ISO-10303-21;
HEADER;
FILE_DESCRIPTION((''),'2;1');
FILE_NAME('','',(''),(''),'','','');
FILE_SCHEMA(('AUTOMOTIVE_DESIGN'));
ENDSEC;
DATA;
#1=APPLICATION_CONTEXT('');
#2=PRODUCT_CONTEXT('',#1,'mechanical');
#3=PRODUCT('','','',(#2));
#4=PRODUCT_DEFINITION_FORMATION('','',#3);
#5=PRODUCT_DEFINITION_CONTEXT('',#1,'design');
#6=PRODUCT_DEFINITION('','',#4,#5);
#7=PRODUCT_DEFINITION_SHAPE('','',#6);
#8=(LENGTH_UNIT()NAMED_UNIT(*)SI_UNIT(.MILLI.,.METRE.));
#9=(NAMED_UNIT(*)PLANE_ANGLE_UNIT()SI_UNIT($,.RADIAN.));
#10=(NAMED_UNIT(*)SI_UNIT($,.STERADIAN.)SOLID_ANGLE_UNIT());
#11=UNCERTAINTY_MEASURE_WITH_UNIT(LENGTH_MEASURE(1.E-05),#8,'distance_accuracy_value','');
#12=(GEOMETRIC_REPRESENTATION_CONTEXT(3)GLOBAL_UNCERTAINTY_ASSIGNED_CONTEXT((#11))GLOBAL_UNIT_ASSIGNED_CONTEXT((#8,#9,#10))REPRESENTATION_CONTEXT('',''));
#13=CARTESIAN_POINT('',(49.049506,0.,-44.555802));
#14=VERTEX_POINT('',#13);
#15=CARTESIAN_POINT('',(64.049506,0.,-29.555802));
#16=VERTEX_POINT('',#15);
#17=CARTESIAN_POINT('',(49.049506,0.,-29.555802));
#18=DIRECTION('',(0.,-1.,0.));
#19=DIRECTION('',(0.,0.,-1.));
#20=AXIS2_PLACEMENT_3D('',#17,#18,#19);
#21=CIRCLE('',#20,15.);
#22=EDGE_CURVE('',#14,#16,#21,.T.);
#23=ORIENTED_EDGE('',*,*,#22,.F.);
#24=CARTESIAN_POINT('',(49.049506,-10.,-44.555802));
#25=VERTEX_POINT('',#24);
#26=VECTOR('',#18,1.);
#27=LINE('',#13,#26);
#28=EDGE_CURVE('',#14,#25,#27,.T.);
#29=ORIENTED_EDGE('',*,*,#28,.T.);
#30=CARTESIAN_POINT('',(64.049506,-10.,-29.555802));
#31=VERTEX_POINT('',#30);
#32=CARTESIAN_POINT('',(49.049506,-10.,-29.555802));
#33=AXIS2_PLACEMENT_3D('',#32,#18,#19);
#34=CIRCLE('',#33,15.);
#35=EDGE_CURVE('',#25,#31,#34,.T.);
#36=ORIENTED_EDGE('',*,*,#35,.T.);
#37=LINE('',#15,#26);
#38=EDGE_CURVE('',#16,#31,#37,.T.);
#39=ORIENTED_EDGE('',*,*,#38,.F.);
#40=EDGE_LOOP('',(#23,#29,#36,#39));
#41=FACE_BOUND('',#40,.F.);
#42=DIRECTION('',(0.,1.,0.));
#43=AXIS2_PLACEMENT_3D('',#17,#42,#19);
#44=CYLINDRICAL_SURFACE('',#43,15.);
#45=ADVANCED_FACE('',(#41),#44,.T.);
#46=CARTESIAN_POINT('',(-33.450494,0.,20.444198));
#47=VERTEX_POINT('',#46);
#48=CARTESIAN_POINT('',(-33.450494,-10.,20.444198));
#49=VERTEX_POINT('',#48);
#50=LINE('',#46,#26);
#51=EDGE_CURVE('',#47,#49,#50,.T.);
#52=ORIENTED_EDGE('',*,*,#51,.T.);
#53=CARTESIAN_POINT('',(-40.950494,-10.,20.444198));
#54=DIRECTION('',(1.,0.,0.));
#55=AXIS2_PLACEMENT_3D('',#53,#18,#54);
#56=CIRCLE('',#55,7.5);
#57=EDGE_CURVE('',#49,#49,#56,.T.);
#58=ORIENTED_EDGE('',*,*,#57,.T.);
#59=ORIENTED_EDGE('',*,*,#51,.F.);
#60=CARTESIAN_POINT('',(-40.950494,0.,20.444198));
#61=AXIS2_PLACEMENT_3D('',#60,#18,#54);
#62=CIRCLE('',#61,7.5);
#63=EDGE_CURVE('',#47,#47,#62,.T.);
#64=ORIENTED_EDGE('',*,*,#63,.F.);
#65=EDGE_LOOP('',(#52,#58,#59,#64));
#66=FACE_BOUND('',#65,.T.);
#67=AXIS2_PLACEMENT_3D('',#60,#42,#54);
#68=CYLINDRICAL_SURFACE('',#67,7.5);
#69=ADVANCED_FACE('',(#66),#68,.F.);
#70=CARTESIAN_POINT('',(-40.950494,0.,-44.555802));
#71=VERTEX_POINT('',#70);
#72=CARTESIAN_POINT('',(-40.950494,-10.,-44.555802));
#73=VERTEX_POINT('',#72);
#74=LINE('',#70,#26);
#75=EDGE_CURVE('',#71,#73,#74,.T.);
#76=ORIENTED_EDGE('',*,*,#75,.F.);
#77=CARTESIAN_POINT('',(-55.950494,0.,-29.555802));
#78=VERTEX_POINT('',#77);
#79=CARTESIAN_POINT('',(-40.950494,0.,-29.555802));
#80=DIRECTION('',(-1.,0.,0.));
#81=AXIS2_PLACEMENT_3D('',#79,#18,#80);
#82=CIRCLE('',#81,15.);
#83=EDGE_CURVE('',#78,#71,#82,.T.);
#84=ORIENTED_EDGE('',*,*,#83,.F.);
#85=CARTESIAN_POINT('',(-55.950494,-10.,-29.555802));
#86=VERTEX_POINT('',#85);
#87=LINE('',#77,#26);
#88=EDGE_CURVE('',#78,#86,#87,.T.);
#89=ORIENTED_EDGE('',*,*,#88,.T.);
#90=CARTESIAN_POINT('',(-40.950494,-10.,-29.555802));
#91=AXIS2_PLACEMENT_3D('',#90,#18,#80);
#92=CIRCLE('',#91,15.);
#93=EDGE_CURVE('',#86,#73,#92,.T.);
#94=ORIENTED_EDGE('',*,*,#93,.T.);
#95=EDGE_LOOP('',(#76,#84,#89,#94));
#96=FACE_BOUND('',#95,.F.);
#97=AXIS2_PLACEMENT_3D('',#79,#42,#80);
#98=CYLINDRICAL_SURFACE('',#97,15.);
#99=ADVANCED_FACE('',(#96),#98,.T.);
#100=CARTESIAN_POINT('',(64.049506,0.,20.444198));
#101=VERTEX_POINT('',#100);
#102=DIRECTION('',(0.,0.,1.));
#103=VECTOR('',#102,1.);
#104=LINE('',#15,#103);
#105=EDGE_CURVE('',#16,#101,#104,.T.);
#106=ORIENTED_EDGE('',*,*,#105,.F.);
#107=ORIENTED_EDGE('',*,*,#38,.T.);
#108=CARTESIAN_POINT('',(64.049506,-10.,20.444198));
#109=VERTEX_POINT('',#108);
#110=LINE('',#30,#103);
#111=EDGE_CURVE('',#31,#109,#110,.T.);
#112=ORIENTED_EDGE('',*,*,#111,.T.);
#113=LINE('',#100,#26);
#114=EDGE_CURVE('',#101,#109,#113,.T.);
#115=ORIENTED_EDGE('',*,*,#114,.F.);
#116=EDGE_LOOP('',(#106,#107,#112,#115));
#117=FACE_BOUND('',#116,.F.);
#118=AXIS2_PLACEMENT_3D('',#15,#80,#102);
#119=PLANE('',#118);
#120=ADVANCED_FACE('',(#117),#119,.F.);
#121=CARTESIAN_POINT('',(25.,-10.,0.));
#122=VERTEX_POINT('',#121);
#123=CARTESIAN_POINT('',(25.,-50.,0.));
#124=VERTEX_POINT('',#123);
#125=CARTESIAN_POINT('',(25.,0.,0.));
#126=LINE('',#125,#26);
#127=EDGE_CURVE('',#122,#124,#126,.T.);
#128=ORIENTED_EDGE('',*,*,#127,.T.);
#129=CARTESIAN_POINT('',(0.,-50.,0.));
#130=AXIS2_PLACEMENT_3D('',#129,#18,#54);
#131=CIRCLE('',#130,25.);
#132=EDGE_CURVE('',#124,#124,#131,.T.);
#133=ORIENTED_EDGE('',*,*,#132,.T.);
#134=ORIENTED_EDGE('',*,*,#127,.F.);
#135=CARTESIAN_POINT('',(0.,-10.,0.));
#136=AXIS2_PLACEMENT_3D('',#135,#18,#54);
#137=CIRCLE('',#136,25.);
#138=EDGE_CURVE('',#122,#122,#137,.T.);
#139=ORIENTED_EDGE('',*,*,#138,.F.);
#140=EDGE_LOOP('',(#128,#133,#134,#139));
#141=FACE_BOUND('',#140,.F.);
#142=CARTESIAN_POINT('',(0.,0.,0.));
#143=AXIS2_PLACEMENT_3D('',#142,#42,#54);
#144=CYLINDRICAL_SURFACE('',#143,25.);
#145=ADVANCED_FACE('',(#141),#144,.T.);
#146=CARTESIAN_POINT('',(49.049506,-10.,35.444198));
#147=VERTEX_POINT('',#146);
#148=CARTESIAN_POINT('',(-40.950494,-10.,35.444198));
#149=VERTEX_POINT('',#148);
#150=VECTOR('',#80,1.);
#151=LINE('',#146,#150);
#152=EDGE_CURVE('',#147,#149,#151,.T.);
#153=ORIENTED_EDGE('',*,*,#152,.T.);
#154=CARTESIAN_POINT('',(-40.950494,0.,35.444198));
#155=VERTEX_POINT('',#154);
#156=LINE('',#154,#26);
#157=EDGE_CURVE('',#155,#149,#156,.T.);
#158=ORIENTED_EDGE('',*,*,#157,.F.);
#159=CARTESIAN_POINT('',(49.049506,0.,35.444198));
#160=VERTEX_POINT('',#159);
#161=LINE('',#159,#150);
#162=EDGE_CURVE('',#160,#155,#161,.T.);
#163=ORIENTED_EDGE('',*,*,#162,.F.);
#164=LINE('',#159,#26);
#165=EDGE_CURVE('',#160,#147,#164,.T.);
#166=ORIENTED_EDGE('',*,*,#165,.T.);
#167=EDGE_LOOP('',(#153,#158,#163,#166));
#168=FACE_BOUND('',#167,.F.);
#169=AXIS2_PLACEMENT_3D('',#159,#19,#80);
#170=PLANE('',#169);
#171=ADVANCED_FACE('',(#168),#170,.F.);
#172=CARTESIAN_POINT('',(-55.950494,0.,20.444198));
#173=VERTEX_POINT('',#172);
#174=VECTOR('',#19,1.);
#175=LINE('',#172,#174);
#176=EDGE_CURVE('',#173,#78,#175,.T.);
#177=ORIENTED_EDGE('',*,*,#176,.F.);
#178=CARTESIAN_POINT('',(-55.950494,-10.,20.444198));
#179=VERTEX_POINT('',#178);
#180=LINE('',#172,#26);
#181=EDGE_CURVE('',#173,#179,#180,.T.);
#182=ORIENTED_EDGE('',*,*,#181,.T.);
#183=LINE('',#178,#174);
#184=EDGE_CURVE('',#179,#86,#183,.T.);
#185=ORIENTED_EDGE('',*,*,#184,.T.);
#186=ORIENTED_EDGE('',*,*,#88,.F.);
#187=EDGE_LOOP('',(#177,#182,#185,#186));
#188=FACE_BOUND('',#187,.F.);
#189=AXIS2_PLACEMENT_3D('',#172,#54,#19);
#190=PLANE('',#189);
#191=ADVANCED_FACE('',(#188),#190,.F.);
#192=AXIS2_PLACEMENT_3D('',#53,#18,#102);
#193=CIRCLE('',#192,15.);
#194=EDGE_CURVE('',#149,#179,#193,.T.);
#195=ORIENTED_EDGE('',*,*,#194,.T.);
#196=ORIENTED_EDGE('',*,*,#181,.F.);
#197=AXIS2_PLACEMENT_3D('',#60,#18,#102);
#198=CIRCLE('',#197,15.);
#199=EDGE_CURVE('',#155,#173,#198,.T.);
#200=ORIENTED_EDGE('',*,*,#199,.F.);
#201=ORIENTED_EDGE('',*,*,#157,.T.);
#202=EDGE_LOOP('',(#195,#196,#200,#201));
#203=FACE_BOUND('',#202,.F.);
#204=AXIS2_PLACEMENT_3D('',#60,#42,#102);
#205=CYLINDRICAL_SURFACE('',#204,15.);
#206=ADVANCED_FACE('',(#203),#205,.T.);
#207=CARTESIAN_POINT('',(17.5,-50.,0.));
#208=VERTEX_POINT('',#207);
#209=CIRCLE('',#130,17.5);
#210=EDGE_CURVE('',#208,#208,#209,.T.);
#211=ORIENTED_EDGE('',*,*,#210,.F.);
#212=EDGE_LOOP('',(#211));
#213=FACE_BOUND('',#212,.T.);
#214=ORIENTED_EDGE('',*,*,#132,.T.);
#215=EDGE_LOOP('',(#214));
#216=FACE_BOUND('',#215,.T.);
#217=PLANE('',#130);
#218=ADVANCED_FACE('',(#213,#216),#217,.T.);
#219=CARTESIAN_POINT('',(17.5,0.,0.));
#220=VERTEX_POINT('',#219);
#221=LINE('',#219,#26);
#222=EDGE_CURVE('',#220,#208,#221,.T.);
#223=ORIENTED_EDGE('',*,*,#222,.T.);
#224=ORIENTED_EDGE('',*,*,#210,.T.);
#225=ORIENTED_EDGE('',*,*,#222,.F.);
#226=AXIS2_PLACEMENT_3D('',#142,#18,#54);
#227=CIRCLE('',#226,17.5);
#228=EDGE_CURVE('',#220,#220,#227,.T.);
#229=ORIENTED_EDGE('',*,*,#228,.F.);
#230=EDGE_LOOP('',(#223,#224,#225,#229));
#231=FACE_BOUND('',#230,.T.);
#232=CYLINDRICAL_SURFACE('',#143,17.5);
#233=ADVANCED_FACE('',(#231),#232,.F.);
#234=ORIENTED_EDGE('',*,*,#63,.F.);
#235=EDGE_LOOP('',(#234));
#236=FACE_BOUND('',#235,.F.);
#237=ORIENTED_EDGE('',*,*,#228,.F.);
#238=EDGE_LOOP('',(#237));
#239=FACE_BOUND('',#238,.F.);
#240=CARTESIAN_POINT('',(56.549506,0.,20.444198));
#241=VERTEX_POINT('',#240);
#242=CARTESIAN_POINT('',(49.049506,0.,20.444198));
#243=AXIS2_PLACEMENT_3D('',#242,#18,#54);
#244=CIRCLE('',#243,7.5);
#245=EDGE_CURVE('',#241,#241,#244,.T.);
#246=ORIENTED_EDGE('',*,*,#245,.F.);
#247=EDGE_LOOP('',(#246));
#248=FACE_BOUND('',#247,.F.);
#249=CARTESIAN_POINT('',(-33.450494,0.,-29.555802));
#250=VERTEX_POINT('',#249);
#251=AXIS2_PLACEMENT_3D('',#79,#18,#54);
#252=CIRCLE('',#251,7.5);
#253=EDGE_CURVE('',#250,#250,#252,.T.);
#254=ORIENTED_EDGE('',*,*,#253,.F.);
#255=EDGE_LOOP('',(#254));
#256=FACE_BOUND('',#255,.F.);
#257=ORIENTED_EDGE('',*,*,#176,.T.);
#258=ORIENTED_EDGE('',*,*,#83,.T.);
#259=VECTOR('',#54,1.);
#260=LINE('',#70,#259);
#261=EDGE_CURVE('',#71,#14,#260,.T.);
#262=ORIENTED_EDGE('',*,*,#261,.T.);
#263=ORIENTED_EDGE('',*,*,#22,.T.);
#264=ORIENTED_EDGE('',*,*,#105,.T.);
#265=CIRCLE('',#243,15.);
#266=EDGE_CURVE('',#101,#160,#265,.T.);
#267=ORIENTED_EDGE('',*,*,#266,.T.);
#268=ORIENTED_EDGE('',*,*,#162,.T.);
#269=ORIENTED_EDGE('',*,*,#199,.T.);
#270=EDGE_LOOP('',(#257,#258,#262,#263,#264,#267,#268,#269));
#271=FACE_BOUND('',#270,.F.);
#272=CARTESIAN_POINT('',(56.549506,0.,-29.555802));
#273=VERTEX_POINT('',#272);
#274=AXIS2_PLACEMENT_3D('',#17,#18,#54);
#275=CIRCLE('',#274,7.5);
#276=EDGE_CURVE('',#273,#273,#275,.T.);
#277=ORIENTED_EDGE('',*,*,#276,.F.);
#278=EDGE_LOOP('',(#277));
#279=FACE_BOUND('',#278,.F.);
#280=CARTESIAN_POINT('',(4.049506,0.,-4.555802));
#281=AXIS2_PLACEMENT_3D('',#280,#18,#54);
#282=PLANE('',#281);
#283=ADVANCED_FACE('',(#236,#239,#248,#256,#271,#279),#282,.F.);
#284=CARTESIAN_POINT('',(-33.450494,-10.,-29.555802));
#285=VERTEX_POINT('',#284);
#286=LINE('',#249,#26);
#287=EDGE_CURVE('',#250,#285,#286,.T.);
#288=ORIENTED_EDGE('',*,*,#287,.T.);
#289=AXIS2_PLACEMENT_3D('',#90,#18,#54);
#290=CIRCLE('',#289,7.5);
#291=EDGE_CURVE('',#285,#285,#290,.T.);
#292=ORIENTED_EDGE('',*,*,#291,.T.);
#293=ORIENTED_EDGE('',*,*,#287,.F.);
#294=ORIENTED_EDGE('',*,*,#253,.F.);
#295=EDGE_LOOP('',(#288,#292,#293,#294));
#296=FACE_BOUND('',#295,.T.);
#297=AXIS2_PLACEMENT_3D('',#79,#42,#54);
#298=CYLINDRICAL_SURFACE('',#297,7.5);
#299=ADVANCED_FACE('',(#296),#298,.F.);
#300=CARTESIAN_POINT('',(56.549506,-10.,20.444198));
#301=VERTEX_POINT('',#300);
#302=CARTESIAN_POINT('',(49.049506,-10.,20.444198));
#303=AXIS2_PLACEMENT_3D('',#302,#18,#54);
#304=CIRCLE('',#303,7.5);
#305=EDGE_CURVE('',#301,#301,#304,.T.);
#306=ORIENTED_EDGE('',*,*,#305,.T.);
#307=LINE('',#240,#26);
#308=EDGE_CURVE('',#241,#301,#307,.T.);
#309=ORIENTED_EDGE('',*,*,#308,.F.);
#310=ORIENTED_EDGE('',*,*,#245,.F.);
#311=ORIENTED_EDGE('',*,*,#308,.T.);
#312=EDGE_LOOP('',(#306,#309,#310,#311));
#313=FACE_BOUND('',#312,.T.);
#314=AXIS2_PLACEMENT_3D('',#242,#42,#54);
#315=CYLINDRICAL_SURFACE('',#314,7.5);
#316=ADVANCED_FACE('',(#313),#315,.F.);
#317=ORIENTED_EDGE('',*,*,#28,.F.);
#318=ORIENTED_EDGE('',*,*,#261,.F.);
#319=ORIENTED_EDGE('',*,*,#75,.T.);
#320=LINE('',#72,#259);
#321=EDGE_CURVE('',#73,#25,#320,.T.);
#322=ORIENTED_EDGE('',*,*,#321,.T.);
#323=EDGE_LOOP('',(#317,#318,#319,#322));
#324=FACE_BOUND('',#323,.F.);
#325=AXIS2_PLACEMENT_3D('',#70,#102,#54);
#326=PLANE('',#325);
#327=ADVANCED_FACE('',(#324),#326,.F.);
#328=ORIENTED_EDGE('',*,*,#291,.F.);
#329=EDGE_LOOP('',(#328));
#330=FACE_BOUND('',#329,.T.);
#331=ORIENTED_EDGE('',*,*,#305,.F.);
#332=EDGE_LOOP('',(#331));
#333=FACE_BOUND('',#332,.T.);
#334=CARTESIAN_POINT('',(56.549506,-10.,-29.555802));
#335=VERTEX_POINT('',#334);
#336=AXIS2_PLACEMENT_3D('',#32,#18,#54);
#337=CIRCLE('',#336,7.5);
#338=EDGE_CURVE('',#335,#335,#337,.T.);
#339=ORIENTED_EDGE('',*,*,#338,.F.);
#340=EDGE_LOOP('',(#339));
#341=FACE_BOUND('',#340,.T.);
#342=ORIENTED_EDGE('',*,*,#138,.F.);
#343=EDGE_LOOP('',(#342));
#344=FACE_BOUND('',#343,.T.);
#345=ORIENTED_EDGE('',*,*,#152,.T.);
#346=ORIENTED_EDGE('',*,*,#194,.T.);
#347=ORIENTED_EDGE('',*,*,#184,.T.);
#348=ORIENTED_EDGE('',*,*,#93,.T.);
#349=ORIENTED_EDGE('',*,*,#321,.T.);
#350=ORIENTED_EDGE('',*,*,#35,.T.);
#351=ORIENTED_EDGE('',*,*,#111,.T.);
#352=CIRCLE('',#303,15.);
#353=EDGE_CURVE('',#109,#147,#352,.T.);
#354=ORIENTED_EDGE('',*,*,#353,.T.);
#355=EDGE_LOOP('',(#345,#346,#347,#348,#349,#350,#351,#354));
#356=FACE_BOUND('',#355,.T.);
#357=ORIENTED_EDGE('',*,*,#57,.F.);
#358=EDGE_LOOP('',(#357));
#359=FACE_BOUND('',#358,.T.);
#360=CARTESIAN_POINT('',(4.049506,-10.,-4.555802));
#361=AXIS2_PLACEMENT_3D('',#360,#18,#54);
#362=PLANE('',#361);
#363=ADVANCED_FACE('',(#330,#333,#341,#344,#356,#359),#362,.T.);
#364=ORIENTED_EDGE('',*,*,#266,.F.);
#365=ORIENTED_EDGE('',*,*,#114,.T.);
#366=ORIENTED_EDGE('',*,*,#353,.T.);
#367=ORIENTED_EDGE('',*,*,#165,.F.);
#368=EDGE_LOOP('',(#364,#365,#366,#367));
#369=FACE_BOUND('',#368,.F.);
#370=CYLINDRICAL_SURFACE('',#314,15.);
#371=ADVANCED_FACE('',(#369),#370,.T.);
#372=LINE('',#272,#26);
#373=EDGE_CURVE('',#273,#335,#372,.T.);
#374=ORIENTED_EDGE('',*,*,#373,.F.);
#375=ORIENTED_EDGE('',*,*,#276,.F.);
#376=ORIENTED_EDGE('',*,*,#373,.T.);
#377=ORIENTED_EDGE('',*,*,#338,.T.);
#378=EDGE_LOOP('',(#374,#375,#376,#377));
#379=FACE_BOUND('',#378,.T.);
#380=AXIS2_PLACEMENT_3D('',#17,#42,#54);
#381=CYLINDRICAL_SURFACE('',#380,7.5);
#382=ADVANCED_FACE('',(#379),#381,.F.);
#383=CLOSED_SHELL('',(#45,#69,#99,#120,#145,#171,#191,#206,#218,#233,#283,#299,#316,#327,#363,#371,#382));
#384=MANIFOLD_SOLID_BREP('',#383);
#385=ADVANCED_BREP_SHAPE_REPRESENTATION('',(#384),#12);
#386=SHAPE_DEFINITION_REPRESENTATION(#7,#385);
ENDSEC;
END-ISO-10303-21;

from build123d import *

# Parameters (mm, degrees)
F0_R     = 25
F0_R_2   = 17.5
F1_DEPTH = 50
F2_DEPTH = 112
F0_R_3   = 7.5
F3_DEPTH = 10


# Not quite as in the source:
# - an extrude ends at something that could not be found from the text; its depth is read off the source's solid


with BuildPart() as f1:
    # F0 (on Front) → F1 (new body)
    with BuildSketch(Plane.XZ):
        Circle(F0_R)
        Circle(F0_R_2, mode=Mode.SUBTRACT)
    extrude(amount=F1_DEPTH)

    # F0 (on Front) → F2 (cut, through all)
    with BuildSketch(Plane.XZ):
        Circle(F0_R_2)
    extrude(amount=-F2_DEPTH, mode=Mode.SUBTRACT)

    # F0 (on Front) → F3 (join)
    with BuildSketch(Plane.XZ):
        with BuildLine():
            Line((49.0495060384, 35.4441977432), (-40.9504939616, 35.4441977432))
            ThreePointArc((-40.9504939616, 35.4441977432), (-51.5570956794, 31.050799461), (-55.9504939616, 20.4441977432))
            Line((-55.9504939616, 20.4441977432), (-55.9504939616, -29.5558022568))
            ThreePointArc((-55.9504939616, -29.5558022568), (-51.5570956794, -40.1624039746), (-40.9504939616, -44.5558022568))
            Line((-40.9504939616, -44.5558022568), (49.0495060384, -44.5558022568))
            ThreePointArc((49.0495060384, -44.5558022568), (59.6561077562, -40.1624039746), (64.0495060384, -29.5558022568))
            Line((64.0495060384, -29.5558022568), (64.0495060384, 20.4441977432))
            ThreePointArc((64.0495060384, 20.4441977432), (59.6561077562, 31.050799461), (49.0495060384, 35.4441977432))
        make_face()
        with Locations((-40.9504939616, -29.5558022568)):
            Circle(F0_R_3, mode=Mode.SUBTRACT)
        with Locations((49.0495060384, -29.5558022568)):
            Circle(F0_R_3, mode=Mode.SUBTRACT)
        Circle(F0_R, mode=Mode.SUBTRACT)
        with Locations((-40.9504939616, 20.4441977432)):
            Circle(F0_R_3, mode=Mode.SUBTRACT)
        with Locations((49.0495060384, 20.4441977432)):
            Circle(F0_R_3, mode=Mode.SUBTRACT)
    extrude(amount=F3_DEPTH)


solid = f1.part
